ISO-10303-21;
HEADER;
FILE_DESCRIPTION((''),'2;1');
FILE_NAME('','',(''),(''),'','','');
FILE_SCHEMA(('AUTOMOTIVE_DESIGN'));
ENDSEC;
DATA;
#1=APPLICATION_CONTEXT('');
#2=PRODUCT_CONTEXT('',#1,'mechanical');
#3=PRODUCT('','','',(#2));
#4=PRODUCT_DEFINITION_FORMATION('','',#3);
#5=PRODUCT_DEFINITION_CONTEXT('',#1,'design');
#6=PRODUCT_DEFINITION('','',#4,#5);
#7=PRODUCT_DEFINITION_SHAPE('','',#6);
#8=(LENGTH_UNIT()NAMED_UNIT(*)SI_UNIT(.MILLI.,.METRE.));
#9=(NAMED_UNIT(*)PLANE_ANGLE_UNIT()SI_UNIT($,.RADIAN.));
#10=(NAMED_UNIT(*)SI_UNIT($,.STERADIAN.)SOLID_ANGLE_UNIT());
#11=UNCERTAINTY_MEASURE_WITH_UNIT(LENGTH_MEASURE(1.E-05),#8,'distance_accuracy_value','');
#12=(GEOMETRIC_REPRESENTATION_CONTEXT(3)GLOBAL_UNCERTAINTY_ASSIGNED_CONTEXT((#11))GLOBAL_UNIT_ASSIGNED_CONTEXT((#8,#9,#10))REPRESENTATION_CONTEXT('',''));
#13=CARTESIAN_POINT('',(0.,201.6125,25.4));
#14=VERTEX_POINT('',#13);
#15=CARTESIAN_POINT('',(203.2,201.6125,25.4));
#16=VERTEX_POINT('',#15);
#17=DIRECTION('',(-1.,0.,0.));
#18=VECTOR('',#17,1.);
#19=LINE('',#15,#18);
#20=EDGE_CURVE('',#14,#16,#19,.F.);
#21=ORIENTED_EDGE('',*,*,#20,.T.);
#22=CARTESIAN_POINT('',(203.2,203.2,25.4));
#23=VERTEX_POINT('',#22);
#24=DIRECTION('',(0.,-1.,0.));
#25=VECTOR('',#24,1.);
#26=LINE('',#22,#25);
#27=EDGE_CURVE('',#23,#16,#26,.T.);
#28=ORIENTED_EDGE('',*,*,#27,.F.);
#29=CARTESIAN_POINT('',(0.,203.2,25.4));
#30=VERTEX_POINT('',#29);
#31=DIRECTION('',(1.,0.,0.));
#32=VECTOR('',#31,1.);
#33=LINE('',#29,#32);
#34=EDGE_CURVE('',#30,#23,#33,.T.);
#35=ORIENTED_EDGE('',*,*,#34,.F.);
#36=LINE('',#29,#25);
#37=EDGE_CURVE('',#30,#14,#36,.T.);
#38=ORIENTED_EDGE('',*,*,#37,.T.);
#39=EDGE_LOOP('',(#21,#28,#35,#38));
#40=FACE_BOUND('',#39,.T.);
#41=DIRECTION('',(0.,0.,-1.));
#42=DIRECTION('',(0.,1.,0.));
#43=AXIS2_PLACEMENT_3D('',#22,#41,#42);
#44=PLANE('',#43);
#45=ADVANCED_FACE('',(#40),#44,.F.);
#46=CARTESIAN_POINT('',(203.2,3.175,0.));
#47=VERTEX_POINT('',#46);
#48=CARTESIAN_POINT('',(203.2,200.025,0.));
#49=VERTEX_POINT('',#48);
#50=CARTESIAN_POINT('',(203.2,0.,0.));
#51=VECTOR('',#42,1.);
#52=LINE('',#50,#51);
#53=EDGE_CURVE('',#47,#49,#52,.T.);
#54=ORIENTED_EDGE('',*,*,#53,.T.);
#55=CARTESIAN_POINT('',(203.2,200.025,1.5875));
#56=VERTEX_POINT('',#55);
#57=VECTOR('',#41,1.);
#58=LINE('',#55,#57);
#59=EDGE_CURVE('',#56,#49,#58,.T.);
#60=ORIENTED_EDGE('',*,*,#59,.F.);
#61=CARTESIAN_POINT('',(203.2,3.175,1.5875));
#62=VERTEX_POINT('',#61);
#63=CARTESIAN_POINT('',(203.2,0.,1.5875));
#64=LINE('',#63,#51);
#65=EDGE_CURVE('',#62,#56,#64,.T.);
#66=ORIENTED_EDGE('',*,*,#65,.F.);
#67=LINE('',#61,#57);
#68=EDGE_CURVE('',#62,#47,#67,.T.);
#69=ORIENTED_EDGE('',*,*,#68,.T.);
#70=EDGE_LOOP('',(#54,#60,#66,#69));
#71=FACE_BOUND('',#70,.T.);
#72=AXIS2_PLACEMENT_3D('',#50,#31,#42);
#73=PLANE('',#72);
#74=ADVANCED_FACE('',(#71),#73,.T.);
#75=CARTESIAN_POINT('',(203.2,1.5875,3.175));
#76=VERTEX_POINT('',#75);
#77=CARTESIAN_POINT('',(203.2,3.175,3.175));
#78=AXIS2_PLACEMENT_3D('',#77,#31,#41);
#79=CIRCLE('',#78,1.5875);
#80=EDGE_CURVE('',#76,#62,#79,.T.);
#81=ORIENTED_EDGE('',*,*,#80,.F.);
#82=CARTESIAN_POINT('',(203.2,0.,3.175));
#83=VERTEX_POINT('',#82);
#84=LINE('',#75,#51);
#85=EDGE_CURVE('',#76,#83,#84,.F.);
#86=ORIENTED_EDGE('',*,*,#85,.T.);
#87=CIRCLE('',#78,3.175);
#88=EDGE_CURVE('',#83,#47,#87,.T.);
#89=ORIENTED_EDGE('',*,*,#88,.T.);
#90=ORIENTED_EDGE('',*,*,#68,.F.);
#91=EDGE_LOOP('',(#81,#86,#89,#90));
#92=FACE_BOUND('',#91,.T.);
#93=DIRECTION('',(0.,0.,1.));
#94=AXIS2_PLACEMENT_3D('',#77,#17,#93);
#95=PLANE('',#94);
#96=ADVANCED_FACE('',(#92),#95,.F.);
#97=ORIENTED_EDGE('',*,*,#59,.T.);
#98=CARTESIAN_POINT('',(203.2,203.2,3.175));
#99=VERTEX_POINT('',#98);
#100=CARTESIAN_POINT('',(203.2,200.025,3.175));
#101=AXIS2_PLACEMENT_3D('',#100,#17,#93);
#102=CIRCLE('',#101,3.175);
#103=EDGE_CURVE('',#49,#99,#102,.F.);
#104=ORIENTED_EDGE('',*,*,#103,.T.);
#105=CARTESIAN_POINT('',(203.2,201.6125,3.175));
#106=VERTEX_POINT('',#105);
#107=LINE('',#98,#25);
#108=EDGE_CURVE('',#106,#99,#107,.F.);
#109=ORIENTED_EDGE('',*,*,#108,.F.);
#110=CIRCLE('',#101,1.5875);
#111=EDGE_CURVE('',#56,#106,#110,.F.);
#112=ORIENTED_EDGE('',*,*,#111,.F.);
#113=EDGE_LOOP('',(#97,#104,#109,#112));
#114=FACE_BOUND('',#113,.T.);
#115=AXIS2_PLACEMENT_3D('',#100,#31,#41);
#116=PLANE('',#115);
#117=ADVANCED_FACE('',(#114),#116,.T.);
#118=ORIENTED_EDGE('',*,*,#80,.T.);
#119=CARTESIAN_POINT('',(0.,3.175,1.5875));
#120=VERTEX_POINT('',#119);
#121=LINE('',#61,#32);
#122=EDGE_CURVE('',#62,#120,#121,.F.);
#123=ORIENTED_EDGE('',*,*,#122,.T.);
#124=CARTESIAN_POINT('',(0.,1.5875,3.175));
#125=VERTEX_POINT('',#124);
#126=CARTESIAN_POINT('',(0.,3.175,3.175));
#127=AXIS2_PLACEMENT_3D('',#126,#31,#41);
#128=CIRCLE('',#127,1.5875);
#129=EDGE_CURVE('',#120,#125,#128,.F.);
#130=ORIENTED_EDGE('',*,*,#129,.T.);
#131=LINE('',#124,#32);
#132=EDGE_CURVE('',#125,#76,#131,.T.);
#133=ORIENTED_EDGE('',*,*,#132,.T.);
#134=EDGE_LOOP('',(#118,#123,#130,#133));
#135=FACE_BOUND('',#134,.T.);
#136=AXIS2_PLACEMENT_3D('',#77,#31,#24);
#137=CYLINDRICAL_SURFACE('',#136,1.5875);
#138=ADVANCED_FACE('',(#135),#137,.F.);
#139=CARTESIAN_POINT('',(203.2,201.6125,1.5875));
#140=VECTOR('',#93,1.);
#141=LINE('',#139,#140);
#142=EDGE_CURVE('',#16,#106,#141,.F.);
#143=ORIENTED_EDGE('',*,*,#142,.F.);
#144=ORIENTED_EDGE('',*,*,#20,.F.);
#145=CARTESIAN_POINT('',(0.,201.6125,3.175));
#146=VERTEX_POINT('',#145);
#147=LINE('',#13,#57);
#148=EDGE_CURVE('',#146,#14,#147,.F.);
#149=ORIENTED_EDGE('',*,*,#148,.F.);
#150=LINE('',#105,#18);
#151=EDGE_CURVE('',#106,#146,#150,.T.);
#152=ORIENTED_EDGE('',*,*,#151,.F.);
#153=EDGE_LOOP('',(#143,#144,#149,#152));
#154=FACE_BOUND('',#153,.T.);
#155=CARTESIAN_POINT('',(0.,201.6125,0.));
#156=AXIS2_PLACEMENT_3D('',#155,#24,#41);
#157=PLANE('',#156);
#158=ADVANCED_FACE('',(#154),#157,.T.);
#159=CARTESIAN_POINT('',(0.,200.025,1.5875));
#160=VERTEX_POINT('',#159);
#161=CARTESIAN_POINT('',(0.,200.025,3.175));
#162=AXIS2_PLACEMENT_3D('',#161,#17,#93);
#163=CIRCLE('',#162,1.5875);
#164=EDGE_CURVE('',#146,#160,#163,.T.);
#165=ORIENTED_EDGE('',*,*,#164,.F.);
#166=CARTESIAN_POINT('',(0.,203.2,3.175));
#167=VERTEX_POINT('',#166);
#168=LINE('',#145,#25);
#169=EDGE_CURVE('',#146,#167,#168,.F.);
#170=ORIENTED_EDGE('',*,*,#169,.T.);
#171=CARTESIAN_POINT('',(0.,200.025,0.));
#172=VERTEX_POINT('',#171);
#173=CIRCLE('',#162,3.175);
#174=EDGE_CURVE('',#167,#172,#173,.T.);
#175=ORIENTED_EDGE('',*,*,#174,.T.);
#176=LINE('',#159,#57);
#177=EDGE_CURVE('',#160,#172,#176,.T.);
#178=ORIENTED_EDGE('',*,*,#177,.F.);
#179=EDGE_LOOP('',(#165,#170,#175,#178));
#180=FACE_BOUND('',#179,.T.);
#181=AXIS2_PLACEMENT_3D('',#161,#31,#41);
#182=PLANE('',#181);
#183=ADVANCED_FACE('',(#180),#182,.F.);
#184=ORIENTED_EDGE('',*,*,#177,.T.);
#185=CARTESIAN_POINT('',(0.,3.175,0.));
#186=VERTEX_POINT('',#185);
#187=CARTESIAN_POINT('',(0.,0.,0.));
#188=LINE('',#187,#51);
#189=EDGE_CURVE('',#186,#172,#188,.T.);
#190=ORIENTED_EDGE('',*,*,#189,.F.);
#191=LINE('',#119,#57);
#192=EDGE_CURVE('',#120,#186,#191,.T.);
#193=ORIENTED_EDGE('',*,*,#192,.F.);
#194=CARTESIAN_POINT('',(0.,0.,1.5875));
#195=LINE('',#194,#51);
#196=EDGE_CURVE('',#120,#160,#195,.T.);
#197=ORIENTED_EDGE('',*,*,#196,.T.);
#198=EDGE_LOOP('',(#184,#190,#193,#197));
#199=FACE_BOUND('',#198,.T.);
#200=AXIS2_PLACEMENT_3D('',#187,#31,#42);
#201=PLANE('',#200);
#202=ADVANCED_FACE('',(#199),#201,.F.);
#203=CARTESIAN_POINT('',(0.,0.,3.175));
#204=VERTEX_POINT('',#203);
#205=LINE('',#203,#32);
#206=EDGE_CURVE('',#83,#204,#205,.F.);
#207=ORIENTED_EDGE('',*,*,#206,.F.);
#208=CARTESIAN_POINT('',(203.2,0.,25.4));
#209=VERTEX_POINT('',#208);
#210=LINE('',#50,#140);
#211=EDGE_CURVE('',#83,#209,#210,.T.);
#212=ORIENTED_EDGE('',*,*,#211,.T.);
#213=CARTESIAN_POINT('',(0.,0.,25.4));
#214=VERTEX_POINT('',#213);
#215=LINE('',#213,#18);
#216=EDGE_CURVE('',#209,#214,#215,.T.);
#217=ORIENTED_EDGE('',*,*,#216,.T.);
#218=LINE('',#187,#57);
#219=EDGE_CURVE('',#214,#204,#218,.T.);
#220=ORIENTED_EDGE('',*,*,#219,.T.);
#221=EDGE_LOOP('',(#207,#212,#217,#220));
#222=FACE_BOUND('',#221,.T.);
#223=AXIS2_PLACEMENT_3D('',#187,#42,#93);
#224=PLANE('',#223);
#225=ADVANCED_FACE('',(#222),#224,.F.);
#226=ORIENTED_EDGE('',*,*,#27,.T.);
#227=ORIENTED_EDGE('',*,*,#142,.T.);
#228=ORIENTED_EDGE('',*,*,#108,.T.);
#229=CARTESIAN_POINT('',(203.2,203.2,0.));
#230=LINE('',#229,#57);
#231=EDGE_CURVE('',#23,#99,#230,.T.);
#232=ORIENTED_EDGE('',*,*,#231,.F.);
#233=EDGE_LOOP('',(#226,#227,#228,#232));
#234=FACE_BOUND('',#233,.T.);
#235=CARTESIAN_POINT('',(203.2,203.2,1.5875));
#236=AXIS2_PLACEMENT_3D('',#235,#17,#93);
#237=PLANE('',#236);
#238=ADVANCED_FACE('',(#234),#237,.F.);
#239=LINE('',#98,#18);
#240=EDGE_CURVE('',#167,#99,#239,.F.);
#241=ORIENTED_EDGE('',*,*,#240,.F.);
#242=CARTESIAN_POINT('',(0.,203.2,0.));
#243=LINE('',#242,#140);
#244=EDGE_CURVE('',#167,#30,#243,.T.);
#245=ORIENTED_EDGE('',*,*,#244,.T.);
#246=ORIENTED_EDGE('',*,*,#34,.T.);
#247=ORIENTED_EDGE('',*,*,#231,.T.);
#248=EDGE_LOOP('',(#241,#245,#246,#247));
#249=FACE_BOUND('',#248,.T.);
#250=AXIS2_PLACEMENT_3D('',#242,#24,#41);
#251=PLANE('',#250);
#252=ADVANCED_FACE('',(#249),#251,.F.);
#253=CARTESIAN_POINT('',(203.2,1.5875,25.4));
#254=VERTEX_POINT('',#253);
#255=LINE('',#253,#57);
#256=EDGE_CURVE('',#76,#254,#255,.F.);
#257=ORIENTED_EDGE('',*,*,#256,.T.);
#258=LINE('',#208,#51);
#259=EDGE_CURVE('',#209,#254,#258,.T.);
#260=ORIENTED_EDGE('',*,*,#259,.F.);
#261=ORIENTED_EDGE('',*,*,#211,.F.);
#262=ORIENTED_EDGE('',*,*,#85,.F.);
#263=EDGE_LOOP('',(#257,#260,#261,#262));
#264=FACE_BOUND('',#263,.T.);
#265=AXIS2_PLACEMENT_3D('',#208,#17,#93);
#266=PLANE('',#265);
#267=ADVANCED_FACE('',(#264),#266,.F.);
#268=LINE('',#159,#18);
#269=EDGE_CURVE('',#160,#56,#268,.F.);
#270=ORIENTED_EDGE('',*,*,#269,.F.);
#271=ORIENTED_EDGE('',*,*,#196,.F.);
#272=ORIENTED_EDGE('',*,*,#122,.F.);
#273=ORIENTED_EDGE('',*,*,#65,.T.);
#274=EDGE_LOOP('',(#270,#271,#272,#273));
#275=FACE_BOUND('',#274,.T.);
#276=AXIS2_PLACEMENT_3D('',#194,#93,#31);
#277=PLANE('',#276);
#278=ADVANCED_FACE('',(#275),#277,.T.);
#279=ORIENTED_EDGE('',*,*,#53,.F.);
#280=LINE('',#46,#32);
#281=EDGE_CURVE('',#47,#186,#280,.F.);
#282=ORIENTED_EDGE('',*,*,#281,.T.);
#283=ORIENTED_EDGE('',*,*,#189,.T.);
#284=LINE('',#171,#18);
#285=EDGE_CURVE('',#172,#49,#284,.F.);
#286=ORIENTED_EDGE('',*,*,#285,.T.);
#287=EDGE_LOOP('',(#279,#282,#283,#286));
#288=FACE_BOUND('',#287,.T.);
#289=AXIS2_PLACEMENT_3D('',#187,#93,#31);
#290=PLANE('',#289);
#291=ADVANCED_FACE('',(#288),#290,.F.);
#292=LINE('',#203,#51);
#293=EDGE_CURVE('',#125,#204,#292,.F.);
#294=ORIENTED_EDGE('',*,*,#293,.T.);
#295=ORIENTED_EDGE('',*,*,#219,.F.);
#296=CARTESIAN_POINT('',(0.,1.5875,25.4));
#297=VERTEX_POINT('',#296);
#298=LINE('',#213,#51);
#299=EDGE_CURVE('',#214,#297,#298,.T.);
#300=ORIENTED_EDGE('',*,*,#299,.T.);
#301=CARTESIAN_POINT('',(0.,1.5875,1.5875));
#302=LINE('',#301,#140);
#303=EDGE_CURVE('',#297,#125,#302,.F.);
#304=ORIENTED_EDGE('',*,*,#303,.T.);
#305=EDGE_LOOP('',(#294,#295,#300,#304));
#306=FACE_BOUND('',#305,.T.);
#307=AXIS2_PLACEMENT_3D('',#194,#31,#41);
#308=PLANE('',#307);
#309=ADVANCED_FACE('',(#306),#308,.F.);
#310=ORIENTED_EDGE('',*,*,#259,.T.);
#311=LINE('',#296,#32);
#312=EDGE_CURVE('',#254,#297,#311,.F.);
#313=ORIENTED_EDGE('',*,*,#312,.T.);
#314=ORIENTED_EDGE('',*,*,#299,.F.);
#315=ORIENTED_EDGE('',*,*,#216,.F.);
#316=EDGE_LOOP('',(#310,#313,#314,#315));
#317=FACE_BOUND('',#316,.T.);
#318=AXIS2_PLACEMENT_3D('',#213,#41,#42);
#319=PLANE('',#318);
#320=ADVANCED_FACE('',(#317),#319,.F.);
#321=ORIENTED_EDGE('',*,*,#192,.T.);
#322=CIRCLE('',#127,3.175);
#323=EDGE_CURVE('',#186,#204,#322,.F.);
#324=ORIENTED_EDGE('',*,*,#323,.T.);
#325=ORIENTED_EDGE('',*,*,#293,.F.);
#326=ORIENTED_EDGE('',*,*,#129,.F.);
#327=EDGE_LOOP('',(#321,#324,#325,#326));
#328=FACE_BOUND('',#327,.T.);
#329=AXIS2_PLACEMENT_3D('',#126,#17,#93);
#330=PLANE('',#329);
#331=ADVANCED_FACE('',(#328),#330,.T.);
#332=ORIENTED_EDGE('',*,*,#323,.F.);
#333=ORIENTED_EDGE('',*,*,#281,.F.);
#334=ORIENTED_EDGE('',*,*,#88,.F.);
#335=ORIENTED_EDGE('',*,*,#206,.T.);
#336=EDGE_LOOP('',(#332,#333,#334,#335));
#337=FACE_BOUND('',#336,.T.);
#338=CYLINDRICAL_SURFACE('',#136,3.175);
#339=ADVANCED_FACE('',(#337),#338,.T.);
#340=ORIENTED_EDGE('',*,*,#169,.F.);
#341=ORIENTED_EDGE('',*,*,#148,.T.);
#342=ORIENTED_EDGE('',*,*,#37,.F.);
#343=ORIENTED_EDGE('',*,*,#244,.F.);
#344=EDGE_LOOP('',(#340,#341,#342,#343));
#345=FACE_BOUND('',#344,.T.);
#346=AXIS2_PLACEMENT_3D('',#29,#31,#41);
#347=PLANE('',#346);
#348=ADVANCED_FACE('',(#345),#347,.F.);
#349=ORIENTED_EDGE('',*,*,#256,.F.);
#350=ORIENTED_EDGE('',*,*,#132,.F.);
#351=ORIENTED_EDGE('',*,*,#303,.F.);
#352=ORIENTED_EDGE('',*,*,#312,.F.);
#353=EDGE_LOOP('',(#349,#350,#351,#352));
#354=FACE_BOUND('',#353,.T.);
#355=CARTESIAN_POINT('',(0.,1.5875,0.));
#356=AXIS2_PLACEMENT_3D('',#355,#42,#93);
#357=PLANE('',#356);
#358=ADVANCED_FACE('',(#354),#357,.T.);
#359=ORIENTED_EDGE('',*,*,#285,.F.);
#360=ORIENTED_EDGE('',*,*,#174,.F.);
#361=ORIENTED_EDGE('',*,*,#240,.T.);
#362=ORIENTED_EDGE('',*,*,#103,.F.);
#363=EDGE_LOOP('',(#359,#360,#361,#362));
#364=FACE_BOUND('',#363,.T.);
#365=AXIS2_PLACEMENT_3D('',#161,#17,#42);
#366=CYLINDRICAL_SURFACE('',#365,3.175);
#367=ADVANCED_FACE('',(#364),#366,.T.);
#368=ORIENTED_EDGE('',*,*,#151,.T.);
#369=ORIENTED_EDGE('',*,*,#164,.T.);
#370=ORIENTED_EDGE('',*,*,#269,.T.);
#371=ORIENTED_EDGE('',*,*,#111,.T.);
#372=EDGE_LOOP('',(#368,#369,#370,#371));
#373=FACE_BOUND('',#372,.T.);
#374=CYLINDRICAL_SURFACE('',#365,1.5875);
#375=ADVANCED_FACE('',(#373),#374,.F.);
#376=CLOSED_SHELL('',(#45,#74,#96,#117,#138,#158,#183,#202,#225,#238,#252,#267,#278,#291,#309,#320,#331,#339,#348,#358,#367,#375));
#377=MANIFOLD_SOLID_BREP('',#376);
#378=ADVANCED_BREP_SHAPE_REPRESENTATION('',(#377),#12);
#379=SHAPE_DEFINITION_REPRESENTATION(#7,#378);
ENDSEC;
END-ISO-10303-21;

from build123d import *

# Parameters (mm, degrees)
SKETCH1_W                      = 203.2
SKETCH1_H                      = 203.2
BOSS_EXTRUDE2_DEPTH            = 1.5875
EDGE_FLANGE1_STRIP_W           = 9.525
EDGE_FLANGE1_STRIP_H           = 1.5875
EDGE_FLANGE1_STRIP_CUT_DEPTH   = 203.2
EDGE_FLANGE1_STRIP_2_W         = 9.525
EDGE_FLANGE1_STRIP_2_H         = 1.5875
EDGE_FLANGE1_STRIP_CUT_2_DEPTH = 203.2
EDGE_FLANGE1_DEPTH             = 203.2
EDGE_FLANGE1_BEND_DEPTH        = 203.2


# Sheet-metal steps are written as plain solids
with BuildPart() as part:
    # Sketch1 → Boss-Extrude2 (new body)
    with BuildSketch(Plane.XY):
        with Locations((101.6, 101.6)):
            Rectangle(SKETCH1_W, SKETCH1_H)
    extrude(amount=BOSS_EXTRUDE2_DEPTH)

    # Edge-Flange1 strip (across the edge) → Edge-Flange1 strip cut (cut)
    with BuildSketch(Plane(origin=(203.2, 203.2, 1.5875), x_dir=(0, -1, 0), z_dir=(-1, 0, 0))):
        with Locations((-1.5875, -0.79375)):
            Rectangle(EDGE_FLANGE1_STRIP_W, EDGE_FLANGE1_STRIP_H)
    extrude(amount=EDGE_FLANGE1_STRIP_CUT_DEPTH, mode=Mode.SUBTRACT)

    # Edge-Flange1 strip 2 (across the edge) → Edge-Flange1 strip cut 2 (cut)
    with BuildSketch(Plane(origin=(0, 0, 1.5875), x_dir=(0, 1, 0), z_dir=(1, 0, 0))):
        with Locations((-1.5875, -0.79375)):
            Rectangle(EDGE_FLANGE1_STRIP_2_W, EDGE_FLANGE1_STRIP_2_H)
    extrude(amount=EDGE_FLANGE1_STRIP_CUT_2_DEPTH, mode=Mode.SUBTRACT)

    # Edge-Flange1 section (across the edge) → Edge-Flange1 (add)
    with BuildSketch(Plane(origin=(203.2, 203.2, 1.5875), x_dir=(0, -1, 0), z_dir=(-1, 0, 0))):
        with BuildLine():
            Line((0, 1.5875), (0, 23.8125))
            Line((0, 23.8125), (1.5875, 23.8125))
            Line((1.5875, 23.8125), (1.5875, 1.5875))
            ThreePointArc((1.5875, 1.5875), (2.052467985, 0.464967985), (3.175, 0))
            Line((3.175, 0), (3.175, -1.5875))
            ThreePointArc((3.175, -1.5875), (0.92993597, -0.65756403), (0, 1.5875))
        make_face()
    extrude(amount=EDGE_FLANGE1_DEPTH)

    # Edge-Flange1 section 2 (across the edge) → Edge-Flange1 bend (add)
    with BuildSketch(Plane(origin=(0, 0, 1.5875), x_dir=(0, 1, 0), z_dir=(1, 0, 0))):
        with BuildLine():
            Line((0, 1.5875), (0, 23.8125))
            Line((0, 23.8125), (1.5875, 23.8125))
            Line((1.5875, 23.8125), (1.5875, 1.5875))
            ThreePointArc((1.5875, 1.5875), (2.052467985, 0.464967985), (3.175, 0))
            Line((3.175, 0), (3.175, -1.5875))
            ThreePointArc((3.175, -1.5875), (0.92993597, -0.65756403), (0, 1.5875))
        make_face()
    extrude(amount=EDGE_FLANGE1_BEND_DEPTH)


solid = part.part
